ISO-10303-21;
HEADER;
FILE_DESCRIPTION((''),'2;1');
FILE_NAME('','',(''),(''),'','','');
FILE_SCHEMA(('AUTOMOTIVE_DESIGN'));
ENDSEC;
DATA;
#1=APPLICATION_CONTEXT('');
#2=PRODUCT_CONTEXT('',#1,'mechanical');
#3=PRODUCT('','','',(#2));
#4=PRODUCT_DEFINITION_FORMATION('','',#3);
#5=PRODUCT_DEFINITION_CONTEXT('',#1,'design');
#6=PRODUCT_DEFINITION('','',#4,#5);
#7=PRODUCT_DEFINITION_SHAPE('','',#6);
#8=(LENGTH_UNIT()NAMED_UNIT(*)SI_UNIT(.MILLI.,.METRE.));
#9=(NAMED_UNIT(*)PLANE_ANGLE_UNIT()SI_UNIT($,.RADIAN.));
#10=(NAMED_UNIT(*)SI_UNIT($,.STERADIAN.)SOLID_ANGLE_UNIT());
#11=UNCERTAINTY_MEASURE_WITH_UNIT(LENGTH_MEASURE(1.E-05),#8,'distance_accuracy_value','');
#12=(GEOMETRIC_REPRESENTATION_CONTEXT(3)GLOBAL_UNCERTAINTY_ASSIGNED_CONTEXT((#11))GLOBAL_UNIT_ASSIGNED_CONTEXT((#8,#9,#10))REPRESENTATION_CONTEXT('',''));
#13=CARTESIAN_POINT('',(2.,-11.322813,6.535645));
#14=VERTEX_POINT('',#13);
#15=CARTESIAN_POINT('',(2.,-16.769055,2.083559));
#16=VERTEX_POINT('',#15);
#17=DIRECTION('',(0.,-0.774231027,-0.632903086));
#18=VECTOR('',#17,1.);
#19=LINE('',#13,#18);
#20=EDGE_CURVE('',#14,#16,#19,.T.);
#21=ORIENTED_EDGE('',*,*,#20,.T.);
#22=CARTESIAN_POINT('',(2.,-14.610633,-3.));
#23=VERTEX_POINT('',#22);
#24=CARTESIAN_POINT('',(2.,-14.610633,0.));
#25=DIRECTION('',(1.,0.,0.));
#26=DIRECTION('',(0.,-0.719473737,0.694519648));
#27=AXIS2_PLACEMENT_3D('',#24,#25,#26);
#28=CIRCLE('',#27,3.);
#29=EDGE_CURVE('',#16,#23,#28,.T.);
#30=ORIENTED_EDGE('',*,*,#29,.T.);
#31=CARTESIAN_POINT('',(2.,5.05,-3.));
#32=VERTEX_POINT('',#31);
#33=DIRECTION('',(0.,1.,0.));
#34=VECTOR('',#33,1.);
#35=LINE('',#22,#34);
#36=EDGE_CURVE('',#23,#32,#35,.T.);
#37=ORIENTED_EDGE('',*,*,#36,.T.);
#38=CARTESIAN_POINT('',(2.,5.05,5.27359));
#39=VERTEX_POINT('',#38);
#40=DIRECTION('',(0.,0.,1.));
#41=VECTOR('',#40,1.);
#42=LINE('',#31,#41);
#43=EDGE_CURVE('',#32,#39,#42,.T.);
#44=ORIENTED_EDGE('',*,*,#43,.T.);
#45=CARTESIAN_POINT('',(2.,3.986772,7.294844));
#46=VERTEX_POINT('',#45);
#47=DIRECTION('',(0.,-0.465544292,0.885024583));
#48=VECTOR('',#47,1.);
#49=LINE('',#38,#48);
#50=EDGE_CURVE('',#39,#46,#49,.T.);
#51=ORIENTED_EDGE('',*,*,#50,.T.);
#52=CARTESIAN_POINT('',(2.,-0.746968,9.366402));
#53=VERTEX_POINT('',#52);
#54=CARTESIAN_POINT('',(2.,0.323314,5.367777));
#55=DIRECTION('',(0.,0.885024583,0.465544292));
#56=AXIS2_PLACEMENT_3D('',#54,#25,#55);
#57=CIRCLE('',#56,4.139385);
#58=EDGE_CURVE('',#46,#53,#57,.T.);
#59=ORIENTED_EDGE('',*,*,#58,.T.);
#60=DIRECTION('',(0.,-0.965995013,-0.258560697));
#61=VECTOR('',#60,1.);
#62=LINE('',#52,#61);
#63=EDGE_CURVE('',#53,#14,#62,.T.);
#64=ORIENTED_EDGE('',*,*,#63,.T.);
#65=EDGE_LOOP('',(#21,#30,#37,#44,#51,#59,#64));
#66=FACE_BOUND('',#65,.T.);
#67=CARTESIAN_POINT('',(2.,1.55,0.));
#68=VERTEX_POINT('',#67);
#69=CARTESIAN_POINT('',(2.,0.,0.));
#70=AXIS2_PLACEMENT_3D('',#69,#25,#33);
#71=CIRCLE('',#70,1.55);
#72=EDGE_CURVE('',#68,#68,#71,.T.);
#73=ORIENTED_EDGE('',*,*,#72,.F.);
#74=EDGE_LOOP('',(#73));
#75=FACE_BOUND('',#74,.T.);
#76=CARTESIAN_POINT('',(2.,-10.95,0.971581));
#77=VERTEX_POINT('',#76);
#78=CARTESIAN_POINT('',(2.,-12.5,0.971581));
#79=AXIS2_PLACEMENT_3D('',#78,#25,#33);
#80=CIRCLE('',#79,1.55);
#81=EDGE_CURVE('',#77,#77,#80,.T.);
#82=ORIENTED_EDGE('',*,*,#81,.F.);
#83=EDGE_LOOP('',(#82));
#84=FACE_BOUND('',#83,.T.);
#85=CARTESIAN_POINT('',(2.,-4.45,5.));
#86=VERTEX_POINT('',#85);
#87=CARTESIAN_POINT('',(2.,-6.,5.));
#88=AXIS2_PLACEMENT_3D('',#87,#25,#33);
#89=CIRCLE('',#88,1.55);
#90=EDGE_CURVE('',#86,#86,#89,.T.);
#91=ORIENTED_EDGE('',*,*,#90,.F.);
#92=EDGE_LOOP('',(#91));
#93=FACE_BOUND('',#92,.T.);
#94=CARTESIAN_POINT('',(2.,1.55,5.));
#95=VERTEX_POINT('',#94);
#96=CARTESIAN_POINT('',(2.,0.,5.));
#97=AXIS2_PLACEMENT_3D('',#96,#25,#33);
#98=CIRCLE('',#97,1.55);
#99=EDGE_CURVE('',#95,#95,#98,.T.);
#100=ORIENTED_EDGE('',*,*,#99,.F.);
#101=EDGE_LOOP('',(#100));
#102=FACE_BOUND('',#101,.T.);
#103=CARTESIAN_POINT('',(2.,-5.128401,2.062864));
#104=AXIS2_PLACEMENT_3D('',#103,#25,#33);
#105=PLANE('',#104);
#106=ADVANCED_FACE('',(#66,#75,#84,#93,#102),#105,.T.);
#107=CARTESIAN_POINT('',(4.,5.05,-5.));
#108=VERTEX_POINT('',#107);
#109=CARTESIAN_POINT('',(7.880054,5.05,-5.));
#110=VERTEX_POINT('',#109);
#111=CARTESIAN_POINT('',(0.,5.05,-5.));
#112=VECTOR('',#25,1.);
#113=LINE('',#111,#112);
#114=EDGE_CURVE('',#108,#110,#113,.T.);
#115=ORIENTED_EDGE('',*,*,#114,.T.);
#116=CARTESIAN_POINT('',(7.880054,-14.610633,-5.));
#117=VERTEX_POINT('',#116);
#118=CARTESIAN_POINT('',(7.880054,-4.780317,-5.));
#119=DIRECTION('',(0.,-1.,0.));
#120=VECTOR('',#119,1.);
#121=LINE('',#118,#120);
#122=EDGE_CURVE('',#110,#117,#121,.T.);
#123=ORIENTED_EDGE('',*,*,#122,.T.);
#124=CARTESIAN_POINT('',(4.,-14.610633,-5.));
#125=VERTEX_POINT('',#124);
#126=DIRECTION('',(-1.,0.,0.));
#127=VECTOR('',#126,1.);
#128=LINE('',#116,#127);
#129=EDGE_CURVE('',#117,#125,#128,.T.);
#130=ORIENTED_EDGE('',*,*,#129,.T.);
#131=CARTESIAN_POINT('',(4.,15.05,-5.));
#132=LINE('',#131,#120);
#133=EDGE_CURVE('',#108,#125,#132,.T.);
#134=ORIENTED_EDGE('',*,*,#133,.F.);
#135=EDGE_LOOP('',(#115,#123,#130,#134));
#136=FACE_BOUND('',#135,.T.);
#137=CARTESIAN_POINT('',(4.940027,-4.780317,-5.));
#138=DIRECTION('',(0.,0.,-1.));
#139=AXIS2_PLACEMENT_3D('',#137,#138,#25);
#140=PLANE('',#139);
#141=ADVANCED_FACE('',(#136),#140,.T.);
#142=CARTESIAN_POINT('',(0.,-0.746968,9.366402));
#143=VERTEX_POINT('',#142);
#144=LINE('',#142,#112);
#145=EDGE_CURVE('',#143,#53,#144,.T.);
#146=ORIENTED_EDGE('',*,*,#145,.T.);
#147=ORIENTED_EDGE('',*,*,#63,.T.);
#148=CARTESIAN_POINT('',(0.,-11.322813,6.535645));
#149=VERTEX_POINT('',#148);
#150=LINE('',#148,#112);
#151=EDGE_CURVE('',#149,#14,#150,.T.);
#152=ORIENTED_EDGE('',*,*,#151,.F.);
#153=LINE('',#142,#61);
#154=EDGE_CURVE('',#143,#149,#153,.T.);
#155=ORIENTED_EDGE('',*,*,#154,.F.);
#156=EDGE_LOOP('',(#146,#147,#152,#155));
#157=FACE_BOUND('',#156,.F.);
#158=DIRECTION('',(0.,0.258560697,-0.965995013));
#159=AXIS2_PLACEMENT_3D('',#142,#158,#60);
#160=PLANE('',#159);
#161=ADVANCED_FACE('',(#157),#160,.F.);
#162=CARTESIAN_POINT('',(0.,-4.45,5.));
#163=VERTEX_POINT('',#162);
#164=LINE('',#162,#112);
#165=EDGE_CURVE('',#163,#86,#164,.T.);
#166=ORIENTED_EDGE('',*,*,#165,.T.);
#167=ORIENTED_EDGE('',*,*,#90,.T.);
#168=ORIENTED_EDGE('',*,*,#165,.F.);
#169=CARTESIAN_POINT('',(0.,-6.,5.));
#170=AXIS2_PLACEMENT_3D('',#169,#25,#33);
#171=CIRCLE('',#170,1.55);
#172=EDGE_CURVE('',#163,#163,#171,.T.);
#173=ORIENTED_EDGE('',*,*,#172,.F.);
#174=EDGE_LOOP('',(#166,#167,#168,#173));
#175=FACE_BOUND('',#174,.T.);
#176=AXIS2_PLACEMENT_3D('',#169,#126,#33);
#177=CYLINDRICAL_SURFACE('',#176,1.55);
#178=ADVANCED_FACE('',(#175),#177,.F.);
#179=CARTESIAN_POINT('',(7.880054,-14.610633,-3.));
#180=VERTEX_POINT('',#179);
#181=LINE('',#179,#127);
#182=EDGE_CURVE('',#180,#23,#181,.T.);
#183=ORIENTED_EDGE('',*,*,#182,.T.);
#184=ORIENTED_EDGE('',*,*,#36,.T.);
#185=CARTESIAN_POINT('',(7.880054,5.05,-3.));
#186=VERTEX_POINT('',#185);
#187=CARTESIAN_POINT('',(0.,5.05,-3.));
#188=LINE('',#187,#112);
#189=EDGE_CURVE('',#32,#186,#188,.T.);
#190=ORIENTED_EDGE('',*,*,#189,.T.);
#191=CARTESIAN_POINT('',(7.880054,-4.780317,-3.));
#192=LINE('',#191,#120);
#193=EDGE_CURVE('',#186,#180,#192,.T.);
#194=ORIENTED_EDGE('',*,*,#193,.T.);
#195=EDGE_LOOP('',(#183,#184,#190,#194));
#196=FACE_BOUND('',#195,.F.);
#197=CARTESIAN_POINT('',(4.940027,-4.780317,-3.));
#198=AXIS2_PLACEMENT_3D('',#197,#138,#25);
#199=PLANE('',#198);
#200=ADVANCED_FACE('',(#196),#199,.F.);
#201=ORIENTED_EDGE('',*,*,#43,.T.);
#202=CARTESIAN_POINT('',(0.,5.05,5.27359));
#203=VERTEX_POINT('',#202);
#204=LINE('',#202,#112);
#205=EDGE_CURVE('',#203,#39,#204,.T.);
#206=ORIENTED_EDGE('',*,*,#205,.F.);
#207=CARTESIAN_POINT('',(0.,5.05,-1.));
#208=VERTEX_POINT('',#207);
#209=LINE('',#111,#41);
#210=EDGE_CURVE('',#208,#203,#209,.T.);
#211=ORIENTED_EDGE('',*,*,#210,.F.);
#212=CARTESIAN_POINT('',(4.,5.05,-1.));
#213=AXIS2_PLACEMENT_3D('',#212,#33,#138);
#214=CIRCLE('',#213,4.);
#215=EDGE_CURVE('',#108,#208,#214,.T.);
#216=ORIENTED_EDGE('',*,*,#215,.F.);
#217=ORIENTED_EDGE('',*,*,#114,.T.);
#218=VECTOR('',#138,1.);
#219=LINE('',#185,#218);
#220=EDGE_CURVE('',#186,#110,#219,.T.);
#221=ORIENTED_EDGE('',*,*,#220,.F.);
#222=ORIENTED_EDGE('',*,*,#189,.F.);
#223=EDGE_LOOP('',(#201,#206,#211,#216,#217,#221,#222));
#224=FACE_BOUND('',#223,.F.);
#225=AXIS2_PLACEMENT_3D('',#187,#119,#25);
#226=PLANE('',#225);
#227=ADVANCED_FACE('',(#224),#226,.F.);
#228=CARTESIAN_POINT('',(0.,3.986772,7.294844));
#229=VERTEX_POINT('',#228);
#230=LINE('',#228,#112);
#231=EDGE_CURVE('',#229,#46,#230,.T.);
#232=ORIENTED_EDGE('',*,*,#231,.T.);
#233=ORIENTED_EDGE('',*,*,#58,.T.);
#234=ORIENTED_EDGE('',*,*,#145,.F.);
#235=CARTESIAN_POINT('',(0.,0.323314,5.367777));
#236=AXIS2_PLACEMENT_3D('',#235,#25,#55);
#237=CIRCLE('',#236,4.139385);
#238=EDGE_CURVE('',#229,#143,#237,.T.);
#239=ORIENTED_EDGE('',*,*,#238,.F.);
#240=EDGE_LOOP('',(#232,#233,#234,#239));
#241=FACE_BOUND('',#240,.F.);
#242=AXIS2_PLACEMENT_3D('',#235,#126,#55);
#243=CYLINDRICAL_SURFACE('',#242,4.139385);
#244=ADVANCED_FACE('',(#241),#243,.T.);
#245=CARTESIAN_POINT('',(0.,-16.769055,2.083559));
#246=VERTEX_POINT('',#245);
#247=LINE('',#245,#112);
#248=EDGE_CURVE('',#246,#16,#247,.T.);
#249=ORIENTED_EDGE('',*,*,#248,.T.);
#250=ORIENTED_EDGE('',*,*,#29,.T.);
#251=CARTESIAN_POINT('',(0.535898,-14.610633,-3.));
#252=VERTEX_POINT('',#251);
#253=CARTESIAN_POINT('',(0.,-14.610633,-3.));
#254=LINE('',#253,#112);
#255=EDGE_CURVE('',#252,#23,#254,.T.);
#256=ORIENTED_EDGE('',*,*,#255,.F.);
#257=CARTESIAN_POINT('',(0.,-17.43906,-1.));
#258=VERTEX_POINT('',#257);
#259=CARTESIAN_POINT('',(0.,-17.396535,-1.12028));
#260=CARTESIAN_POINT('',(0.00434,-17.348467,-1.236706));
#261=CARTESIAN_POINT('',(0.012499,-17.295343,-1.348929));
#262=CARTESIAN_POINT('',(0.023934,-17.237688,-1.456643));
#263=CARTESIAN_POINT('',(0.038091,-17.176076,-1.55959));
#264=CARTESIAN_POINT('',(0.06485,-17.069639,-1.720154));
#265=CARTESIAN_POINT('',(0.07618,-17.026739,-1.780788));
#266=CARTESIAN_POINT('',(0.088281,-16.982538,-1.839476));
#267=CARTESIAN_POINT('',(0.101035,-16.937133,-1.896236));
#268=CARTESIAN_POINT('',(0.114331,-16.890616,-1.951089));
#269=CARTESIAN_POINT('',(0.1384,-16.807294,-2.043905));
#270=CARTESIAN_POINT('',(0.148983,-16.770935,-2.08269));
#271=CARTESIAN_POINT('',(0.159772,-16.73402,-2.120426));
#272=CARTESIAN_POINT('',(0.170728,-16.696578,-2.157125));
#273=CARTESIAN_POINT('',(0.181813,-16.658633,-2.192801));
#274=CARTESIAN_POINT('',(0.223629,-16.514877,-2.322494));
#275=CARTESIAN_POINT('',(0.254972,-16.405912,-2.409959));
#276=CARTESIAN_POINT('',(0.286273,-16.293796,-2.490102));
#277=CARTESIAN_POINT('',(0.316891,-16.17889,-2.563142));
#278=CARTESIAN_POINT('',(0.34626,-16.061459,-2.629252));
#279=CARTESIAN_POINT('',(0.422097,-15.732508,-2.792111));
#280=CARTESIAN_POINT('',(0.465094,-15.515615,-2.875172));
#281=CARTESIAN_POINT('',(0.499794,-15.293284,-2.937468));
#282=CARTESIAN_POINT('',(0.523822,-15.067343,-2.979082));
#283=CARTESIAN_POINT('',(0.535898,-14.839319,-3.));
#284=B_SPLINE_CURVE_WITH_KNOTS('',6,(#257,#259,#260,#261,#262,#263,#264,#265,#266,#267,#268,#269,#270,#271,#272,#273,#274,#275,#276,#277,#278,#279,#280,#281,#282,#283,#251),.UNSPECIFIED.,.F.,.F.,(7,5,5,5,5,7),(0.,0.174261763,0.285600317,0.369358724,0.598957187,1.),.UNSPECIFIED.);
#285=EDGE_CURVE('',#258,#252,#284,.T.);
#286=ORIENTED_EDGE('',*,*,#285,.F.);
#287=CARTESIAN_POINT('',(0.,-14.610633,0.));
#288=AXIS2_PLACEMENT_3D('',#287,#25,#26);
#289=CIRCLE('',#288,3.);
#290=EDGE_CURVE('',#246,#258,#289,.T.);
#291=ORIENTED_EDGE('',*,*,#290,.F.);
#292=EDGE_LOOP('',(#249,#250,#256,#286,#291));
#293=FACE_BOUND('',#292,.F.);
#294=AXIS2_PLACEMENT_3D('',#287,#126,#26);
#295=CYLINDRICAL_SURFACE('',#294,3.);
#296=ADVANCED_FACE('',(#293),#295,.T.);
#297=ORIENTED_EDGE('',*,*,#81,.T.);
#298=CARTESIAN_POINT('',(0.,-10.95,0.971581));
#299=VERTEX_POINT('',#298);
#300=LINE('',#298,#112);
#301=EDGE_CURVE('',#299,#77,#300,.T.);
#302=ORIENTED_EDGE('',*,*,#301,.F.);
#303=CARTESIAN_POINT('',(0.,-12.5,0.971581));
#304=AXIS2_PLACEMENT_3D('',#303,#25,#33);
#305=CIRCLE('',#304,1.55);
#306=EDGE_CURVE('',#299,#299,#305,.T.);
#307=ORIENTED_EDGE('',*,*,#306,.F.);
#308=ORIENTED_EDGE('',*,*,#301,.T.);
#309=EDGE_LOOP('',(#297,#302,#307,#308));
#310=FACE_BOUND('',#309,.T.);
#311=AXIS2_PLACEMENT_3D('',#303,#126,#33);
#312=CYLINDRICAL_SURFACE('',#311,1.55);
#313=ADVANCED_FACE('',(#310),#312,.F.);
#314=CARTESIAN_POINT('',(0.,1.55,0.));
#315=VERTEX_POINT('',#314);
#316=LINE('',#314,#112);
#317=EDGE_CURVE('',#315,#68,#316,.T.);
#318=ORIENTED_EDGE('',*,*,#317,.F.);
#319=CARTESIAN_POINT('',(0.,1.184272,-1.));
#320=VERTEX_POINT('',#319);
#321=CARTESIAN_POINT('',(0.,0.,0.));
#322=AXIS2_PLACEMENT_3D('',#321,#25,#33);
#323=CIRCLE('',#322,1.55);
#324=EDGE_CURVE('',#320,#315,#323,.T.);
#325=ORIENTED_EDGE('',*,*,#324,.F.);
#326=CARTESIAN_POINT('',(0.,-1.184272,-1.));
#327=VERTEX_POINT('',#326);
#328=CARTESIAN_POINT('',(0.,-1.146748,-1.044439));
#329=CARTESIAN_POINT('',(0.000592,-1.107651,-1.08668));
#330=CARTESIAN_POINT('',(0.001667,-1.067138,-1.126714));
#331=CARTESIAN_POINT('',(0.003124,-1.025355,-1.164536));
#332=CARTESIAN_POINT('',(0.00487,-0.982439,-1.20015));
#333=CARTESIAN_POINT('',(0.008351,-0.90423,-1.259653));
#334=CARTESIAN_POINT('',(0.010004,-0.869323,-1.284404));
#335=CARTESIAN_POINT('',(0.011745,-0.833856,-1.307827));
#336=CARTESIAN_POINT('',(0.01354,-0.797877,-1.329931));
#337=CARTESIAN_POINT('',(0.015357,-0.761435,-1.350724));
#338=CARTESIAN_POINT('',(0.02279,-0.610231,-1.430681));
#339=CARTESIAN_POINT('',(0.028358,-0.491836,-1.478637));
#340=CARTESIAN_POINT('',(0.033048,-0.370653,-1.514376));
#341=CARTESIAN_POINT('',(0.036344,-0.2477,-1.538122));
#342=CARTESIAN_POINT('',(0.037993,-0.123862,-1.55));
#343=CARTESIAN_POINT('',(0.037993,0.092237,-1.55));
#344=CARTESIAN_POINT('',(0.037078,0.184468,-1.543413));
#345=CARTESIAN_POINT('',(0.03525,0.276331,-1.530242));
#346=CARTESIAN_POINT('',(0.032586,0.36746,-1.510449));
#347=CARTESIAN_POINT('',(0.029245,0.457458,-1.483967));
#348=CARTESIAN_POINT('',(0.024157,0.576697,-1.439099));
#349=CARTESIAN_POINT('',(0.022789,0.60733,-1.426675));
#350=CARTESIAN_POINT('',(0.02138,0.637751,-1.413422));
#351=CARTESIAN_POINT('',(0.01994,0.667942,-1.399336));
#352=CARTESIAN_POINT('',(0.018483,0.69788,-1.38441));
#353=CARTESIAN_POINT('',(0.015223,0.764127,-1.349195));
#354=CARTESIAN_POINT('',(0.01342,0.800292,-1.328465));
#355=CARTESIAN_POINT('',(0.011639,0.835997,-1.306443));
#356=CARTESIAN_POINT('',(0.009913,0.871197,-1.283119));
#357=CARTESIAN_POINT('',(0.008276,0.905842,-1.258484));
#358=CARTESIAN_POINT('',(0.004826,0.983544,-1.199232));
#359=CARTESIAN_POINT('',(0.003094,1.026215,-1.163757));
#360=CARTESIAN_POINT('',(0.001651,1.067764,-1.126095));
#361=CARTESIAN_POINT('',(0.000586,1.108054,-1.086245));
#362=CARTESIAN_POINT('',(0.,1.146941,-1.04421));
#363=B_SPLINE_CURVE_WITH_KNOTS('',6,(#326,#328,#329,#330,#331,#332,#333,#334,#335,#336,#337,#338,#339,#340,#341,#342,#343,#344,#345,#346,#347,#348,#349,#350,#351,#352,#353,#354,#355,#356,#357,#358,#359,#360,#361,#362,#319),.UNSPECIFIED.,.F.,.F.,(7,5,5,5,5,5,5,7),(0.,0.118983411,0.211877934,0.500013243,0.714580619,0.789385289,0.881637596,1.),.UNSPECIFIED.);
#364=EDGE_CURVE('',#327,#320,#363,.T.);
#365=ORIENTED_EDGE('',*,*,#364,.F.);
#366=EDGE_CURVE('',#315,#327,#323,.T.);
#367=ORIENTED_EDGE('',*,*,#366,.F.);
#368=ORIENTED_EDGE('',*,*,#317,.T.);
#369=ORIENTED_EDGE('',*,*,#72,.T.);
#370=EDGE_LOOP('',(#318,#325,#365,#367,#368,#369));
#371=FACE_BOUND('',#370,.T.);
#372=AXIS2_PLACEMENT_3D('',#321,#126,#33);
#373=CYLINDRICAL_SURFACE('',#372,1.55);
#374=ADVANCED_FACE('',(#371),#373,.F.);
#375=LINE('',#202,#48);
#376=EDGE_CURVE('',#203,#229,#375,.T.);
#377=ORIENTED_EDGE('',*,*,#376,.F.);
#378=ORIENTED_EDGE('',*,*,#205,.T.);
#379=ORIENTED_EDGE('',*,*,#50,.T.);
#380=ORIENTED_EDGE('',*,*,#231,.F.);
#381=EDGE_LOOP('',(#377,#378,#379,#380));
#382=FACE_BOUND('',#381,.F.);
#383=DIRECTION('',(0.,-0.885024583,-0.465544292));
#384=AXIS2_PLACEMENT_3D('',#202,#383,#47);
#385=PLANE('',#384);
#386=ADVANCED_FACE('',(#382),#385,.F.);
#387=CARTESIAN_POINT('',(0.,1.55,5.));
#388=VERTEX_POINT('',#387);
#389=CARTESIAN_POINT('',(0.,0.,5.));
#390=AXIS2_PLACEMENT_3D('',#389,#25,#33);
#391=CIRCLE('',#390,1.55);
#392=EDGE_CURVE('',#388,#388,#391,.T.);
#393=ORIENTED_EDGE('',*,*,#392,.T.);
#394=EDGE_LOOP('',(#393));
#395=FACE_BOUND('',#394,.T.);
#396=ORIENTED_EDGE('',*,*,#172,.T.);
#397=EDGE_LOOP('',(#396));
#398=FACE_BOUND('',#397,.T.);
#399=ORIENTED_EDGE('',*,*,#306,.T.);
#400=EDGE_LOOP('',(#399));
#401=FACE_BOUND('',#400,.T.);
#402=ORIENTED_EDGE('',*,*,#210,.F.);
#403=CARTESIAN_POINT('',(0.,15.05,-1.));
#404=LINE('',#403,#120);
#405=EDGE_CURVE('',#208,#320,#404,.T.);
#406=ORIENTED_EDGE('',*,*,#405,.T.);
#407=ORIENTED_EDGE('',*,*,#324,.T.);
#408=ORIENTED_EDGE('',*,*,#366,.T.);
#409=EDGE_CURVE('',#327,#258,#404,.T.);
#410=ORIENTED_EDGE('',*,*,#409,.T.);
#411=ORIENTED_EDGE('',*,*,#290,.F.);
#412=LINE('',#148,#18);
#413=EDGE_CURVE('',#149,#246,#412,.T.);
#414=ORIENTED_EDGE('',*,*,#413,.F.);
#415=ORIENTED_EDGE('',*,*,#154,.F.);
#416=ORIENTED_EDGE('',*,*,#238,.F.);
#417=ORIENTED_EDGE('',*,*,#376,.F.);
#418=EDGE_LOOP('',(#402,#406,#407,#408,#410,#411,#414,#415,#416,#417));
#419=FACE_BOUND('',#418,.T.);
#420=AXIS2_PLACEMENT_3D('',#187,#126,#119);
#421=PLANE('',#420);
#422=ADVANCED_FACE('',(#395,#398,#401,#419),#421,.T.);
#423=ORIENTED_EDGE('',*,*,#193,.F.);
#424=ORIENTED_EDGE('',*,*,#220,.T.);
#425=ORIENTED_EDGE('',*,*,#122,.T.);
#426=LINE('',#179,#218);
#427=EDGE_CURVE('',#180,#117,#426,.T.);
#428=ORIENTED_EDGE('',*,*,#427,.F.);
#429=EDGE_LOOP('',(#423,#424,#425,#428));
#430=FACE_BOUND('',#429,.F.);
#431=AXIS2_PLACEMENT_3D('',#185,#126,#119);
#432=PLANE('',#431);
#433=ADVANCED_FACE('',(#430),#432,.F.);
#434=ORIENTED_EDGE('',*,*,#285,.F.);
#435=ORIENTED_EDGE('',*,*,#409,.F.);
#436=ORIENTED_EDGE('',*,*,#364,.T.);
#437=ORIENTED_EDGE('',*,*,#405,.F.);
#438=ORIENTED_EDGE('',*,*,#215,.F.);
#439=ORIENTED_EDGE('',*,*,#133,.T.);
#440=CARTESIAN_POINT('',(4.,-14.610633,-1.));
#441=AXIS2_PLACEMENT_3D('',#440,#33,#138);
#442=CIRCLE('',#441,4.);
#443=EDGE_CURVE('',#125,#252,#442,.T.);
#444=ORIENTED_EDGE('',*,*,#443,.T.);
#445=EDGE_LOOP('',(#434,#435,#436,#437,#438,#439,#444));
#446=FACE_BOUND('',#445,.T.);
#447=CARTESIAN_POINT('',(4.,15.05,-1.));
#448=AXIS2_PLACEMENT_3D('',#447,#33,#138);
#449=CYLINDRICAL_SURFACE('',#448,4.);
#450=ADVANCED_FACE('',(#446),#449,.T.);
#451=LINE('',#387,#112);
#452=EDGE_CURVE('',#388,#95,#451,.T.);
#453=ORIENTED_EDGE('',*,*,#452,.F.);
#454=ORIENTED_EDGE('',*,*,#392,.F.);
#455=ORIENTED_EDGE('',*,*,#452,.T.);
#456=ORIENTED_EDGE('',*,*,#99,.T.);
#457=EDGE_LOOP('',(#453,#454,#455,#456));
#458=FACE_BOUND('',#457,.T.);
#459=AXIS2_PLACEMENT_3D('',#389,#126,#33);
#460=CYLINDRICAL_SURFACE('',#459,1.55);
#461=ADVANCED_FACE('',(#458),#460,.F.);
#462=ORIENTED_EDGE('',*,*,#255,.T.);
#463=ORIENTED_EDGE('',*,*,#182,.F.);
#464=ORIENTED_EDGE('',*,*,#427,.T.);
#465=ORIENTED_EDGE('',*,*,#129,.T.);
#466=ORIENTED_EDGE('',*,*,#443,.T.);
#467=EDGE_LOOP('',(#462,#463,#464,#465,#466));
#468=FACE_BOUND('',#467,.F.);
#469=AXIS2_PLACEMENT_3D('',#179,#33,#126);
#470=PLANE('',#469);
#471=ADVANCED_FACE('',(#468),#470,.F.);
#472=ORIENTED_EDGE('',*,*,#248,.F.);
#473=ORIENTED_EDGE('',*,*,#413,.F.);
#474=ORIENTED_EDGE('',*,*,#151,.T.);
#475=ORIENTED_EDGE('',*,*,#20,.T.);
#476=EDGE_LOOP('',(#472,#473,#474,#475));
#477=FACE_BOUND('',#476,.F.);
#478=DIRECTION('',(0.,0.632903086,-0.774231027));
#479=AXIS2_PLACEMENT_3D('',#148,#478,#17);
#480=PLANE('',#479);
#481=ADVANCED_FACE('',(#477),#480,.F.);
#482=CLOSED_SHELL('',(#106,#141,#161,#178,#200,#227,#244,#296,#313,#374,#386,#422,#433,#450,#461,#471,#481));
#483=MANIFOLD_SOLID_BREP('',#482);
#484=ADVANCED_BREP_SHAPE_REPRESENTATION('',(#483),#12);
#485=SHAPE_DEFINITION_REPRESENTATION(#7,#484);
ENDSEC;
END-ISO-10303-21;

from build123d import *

# Parameters (mm, degrees)
F0_R        = 1.55
F1_DEPTH    = 2
F2_W        = 5.8800544143
F2_H        = 19.6606332908
F2_W_2      = 2
F3_DEPTH    = 2
F4_T1_DEPTH = 39.6606332908


# Not quite as in the source:
# - a fillet or chamfer that OpenCascade refuses, or shapes differently, is made with other operations: its cross-section is extruded or revolved along the edge and cut away or added


with BuildPart() as f1:
    # F0 (on Right) → F1 (new body)
    with BuildSketch(Plane.YZ):
        with BuildLine():
            Line((-14.6106332908, -3), (-13.2183143869, -3))
            Line((-13.2183143869, -3), (5.05, -3))
            Line((5.05, -3), (5.05, 5.273589902))
            Line((5.05, 5.273589902), (3.9867715302, 7.2948440555))
            ThreePointArc((3.9867715302, 7.2948440555), (1.9828252763, 9.159944049), (-0.7469684056, 9.3664023457))
            Line((-0.7469684056, 9.3664023457), (-11.3228132649, 6.5356446488))
            Line((-11.3228132649, 6.5356446488), (-16.7690545021, 2.0835589443))
            ThreePointArc((-16.7690545021, 2.0835589443), (-17.372034822, -1.1724596298), (-14.6106332908, -3))
        make_face()
        with Locations((-12.5, 0.9715808555)):
            Circle(F0_R, mode=Mode.SUBTRACT)
        Circle(F0_R, mode=Mode.SUBTRACT)
        with Locations((-6, 5)):
            Circle(F0_R, mode=Mode.SUBTRACT)
        with Locations((0, 5)):
            Circle(F0_R, mode=Mode.SUBTRACT)
    extrude(amount=F1_DEPTH)

    # F2 (on face) → F3 (join)
    with BuildSketch(Plane(origin=(0, 0, -3), x_dir=(1, 0, 0), z_dir=(0, 0, -1))):
        with Locations((4.9400272071, 4.7803166454)):
            Rectangle(F2_W, F2_H)
        with Locations((1, 4.7803166454)):
            Rectangle(F2_W_2, F2_H)
    extrude(amount=F3_DEPTH)

    # F4: fillet of radius 4 on 1 edges, made by hand

    # F4_s2 → F4_t1 (cut)
    with BuildSketch(Plane.XZ.offset(-15.05)):
        with BuildLine():
            ThreePointArc((4, -5), (1.1715728753, -3.8284271247), (0, -1))
            Line((0, -1), (0, -5))
            Line((0, -5), (4, -5))
        make_face()
    extrude(amount=F4_T1_DEPTH, mode=Mode.SUBTRACT)


solid = f1.part
